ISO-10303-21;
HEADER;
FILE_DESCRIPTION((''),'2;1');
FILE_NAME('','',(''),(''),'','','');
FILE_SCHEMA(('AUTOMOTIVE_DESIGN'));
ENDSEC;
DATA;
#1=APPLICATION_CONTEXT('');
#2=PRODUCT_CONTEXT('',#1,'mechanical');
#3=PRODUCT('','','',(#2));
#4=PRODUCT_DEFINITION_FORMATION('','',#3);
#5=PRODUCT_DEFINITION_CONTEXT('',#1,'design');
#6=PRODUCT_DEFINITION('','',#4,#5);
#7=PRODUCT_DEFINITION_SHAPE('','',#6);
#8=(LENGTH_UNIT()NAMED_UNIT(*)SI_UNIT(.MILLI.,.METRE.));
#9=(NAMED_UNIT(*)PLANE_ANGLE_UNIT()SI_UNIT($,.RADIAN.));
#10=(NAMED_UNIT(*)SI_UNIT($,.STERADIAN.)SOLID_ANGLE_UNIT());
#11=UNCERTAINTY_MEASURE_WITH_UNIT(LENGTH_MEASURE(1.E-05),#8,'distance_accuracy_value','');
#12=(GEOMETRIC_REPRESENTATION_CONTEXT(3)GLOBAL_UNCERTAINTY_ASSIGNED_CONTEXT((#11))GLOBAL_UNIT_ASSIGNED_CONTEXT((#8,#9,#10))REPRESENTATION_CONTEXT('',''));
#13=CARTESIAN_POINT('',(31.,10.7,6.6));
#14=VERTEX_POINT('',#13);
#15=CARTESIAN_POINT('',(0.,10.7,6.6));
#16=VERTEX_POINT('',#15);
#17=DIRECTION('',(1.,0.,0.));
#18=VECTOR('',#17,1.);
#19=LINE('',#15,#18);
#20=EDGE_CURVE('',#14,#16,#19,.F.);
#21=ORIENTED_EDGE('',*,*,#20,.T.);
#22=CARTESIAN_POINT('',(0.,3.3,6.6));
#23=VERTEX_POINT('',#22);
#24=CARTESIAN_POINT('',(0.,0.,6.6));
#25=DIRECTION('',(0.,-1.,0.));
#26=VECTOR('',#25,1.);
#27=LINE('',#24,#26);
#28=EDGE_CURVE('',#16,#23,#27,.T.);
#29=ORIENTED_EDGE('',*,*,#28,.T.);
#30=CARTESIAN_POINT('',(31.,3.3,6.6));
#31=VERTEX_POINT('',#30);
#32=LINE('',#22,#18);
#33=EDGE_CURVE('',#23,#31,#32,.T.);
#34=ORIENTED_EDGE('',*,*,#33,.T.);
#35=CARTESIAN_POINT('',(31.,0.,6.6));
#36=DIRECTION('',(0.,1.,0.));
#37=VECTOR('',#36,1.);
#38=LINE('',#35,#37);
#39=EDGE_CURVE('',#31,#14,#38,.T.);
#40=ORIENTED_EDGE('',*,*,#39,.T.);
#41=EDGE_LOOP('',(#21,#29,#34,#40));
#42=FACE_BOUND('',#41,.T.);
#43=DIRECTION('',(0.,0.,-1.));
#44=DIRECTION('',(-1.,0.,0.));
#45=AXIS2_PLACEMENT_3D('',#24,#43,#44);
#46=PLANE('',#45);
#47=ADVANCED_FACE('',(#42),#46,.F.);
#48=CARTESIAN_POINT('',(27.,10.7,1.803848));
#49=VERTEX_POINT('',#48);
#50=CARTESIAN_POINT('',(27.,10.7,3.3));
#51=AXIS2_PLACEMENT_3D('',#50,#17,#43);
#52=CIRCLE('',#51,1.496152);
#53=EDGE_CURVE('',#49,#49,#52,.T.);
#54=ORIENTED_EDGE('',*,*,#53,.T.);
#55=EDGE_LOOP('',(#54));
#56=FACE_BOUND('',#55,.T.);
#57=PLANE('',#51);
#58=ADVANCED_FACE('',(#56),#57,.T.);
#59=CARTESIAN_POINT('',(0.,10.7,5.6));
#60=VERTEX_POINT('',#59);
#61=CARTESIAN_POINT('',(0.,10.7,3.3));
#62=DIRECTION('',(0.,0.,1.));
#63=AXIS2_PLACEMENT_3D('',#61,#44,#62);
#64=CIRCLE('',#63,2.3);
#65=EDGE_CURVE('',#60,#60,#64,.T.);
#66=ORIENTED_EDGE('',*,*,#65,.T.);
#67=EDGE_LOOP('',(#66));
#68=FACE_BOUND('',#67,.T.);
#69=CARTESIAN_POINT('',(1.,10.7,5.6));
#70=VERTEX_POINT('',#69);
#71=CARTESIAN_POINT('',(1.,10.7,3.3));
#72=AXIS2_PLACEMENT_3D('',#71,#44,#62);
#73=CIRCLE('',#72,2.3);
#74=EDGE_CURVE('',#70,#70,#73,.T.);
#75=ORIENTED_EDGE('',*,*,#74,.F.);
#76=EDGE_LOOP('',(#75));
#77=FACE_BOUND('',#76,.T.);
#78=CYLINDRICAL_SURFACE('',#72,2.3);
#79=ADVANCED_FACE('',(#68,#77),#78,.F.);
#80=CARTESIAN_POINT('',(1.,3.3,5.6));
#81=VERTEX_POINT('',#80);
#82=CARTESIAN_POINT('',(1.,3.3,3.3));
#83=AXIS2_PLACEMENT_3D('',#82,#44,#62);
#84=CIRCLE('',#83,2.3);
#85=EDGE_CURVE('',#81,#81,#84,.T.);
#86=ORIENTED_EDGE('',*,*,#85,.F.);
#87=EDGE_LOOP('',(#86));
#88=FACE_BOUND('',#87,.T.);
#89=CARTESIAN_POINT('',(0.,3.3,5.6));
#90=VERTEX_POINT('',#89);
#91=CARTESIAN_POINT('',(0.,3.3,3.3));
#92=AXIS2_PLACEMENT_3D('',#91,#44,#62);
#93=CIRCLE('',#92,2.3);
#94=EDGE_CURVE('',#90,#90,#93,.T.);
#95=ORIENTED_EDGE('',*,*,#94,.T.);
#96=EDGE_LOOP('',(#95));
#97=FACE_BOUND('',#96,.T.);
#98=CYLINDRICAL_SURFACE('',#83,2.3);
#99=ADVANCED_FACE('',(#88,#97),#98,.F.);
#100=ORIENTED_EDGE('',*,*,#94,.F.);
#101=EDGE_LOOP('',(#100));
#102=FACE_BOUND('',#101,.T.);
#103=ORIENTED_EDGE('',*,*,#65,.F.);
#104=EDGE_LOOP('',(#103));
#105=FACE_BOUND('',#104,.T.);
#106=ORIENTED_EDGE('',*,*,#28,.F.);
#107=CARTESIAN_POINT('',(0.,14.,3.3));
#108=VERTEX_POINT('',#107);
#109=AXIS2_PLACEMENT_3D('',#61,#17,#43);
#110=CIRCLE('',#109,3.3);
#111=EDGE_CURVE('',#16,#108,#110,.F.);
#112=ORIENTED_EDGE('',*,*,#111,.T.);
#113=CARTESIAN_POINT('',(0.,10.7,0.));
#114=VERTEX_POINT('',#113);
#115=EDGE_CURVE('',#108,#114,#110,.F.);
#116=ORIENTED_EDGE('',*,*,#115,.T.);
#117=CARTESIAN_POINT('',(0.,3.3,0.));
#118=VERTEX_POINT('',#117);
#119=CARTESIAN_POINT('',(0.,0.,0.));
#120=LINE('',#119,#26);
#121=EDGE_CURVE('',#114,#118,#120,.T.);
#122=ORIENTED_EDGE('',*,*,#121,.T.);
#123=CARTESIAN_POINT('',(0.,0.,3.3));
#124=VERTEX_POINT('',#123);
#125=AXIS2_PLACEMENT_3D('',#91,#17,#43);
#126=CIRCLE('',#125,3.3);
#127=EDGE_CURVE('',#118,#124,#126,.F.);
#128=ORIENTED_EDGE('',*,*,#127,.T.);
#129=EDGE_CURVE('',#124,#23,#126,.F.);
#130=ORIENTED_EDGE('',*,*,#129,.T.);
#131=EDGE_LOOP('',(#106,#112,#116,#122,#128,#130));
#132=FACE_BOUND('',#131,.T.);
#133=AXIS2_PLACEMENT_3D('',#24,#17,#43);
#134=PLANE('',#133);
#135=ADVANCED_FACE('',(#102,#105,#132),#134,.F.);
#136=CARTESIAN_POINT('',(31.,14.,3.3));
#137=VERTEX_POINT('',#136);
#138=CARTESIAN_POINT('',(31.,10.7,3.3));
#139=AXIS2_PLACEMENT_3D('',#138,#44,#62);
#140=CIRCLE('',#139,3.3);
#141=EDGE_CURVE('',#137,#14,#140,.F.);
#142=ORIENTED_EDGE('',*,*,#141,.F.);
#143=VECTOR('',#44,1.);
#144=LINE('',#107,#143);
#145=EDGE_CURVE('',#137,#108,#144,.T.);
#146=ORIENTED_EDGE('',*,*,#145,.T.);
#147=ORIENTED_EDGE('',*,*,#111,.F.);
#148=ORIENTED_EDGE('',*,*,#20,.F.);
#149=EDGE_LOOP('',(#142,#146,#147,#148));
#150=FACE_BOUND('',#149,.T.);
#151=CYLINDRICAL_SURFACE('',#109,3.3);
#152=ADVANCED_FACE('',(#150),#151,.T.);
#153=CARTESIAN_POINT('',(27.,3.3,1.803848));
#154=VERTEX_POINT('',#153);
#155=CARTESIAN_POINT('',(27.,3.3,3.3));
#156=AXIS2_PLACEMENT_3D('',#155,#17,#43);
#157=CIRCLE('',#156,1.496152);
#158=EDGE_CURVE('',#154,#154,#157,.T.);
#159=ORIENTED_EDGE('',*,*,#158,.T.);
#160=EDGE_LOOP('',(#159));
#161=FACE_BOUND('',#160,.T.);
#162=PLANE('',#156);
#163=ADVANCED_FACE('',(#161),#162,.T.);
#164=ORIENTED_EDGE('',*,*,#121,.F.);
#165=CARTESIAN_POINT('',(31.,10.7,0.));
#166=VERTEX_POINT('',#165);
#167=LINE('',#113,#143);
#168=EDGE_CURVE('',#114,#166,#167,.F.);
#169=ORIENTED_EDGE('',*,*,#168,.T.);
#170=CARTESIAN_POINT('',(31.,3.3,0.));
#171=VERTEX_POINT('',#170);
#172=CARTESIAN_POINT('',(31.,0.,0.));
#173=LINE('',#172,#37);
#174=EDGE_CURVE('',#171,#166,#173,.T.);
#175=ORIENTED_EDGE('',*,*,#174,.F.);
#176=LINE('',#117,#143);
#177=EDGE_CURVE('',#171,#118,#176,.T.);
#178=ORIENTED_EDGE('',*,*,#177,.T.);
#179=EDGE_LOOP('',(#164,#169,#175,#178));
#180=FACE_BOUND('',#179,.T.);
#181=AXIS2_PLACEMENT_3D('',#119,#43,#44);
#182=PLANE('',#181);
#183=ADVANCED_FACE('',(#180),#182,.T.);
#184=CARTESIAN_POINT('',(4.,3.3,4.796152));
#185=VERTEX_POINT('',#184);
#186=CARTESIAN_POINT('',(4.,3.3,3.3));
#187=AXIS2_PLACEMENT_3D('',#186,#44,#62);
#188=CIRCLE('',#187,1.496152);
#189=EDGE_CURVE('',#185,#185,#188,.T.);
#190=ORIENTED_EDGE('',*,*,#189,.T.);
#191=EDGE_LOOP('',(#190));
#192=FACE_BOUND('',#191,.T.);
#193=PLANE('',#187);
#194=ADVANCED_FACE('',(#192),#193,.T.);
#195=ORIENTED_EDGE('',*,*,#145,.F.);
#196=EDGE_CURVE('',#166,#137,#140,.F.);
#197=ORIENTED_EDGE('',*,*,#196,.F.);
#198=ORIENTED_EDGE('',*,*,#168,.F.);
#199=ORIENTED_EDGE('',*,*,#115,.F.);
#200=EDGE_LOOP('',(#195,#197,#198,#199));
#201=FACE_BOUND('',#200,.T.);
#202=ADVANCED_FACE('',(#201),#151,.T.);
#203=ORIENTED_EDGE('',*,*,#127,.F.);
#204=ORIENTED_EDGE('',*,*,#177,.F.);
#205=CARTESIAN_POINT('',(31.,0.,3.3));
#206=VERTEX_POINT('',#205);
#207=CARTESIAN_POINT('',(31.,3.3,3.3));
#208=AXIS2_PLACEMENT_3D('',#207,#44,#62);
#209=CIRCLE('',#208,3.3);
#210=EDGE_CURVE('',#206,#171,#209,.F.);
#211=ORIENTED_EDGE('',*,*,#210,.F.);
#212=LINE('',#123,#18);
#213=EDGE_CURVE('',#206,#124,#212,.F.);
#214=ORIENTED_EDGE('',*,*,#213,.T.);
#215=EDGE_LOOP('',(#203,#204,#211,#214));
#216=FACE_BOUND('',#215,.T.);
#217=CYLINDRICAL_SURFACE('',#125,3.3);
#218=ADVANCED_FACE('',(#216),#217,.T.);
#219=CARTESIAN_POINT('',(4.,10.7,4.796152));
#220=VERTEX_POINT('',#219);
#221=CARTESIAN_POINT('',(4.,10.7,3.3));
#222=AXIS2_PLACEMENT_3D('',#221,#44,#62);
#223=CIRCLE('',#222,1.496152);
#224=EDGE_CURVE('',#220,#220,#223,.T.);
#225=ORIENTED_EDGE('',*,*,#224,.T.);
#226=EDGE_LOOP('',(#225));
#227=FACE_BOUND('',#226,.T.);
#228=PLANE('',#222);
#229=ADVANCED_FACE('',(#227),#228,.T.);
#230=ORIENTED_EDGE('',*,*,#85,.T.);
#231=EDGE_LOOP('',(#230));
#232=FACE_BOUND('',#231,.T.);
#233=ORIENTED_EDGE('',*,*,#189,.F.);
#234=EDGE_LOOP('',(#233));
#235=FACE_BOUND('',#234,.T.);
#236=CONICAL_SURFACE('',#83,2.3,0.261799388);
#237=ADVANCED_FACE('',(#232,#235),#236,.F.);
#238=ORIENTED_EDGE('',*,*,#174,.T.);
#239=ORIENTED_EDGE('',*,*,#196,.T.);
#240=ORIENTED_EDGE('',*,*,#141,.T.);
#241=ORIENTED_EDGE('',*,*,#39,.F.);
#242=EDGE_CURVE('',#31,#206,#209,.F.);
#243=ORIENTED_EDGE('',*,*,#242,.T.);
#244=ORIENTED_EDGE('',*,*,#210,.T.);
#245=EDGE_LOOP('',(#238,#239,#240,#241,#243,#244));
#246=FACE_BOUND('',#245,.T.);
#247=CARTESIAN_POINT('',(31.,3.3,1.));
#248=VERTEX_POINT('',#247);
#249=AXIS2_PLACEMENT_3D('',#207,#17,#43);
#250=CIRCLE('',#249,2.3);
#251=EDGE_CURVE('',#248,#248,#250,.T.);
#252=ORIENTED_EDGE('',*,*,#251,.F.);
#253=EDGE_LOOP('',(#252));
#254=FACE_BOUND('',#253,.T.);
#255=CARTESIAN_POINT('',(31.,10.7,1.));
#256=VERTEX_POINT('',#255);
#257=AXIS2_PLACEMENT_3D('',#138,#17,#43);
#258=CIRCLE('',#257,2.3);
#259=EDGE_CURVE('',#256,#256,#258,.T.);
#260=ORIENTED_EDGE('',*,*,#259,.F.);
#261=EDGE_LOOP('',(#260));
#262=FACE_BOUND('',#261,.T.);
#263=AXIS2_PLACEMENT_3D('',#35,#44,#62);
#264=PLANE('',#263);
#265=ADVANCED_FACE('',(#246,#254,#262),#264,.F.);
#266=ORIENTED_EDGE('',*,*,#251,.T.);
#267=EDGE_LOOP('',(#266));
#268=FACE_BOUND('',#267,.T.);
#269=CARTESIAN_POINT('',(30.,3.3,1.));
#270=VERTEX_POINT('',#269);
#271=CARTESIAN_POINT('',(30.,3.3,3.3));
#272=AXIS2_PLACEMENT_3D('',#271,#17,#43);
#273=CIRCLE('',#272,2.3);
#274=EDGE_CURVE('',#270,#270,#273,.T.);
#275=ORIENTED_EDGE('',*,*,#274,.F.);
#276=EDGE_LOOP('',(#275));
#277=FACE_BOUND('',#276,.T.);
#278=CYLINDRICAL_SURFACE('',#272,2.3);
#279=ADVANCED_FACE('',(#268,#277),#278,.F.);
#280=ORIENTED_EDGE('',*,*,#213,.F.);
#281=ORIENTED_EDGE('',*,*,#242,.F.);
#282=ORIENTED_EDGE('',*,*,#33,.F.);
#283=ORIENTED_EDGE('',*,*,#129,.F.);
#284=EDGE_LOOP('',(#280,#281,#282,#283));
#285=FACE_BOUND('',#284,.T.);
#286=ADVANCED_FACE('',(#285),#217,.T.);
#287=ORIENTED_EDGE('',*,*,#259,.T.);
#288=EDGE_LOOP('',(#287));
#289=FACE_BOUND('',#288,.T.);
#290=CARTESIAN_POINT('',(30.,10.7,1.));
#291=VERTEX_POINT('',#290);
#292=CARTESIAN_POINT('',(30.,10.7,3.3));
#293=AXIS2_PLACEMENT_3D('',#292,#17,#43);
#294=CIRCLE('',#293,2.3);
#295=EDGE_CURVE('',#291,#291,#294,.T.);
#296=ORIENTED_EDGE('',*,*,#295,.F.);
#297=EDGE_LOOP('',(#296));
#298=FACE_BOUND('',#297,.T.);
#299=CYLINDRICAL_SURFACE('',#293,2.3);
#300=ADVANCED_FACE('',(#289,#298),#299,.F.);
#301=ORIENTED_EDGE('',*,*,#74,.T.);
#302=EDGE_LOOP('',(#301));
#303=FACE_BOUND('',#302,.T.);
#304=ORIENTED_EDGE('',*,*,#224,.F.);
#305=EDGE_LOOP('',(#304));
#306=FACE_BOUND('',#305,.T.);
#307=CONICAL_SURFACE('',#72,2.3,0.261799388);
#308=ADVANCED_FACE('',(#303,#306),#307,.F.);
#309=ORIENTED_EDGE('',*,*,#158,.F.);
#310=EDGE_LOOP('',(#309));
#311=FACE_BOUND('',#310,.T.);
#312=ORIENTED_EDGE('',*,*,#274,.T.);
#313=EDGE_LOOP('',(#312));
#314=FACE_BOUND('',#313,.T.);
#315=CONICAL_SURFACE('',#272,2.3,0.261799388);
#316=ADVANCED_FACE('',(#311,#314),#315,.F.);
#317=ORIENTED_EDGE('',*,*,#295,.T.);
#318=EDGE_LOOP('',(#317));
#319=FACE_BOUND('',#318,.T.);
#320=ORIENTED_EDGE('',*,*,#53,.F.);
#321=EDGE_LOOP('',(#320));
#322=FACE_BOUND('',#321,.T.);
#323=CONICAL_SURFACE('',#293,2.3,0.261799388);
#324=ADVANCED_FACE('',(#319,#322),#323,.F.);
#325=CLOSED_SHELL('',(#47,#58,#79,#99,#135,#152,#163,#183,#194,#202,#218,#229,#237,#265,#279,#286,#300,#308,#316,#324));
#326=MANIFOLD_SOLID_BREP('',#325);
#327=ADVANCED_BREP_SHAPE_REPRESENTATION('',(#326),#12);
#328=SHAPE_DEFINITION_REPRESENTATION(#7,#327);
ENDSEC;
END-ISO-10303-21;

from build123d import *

# Parameters (mm, degrees)
SKETCH1_W                = 31
SKETCH1_H                = 14
BOSS_EXTRUDE1_DEPTH      = 6.6
SKETCH2_R                = 2.3
CUT_EXTRUDE1_DEPTH       = 1
ZAOBLIT7_R               = 3.3
ZAOBLIT12_R              = 3.3
ZAOBLIT13_R              = 3.3
ZAOBLIT14_R              = 3.3
ODEBRAT_START            = -1
SKICA1_R                 = 2.3
ODEBRAT_VYSUNUT_M1_DEPTH = 1
SKICA3_R                 = 2.3
ODEBRAT_VYSUNUT_M2_DEPTH = 3
ODEBRAT_VYSUNUT_M2_DRAFT = -15
SKICA4_R                 = 2.3
ODEBRAT_VYSUNUT_M3_DEPTH = 3
ODEBRAT_VYSUNUT_M3_DRAFT = -15
SKICA5_R                 = 2.3
ODEBRAT_VYSUNUT_M4_DEPTH = 3
ODEBRAT_VYSUNUT_M4_DRAFT = -15
SKICA6_R                 = 2.3
ODEBRAT_VYSUNUT_M5_DEPTH = 3
ODEBRAT_VYSUNUT_M5_DRAFT = -15


with BuildPart() as part:
    # Sketch1 → Boss-Extrude1 (new body)
    with BuildSketch(Plane.XY):
        with Locations((15.5, 7)):
            Rectangle(SKETCH1_W, SKETCH1_H)
    extrude(amount=BOSS_EXTRUDE1_DEPTH)

    # Sketch2 → Cut-Extrude1 (cut)
    with BuildSketch(Plane.ZY):
        with Locations((3.3, 10.7)):
            Circle(SKETCH2_R)
        with Locations((3.3, 3.3)):
            Circle(SKETCH2_R)
    extrude(amount=-CUT_EXTRUDE1_DEPTH, mode=Mode.SUBTRACT)

    # Zaoblit7
    zaoblit7_edges = [part.edges().sort_by_distance(p)[0] for p in [
        (15.5, 14, 0),
    ]]
    fillet(zaoblit7_edges, radius=ZAOBLIT7_R)

    # Zaoblit12
    zaoblit12_edges = [part.edges().sort_by_distance(p)[0] for p in [
        (15.5, 14, 6.6),
    ]]
    fillet(zaoblit12_edges, radius=ZAOBLIT12_R - 0.0001)  # a hair under: the kernel refuses the full size

    # Zaoblit13
    zaoblit13_edges = [part.edges().sort_by_distance(p)[0] for p in [
        (15.5, 0, 6.6),
    ]]
    fillet(zaoblit13_edges, radius=ZAOBLIT13_R)

    # Zaoblit14
    zaoblit14_edges = [part.edges().sort_by_distance(p)[0] for p in [
        (15.5, 0, 0),
    ]]
    fillet(zaoblit14_edges, radius=ZAOBLIT14_R - 0.0001)  # a hair under: the kernel refuses the full size

    # Skica1 → Odebrat vysunutím1 (cut)
    with BuildSketch(Plane(origin=(31, 0, 0), x_dir=(0, 0, -1), z_dir=(1, 0, 0)).offset(ODEBRAT_START)):
        with Locations(Location((-3.3, 10.7, 0), (0, 0, 180))):
            Circle(SKICA1_R)
        with Locations(Location((-3.3, 3.3, 0), (0, 0, 180))):
            Circle(SKICA1_R)
    extrude(amount=ODEBRAT_VYSUNUT_M1_DEPTH, mode=Mode.SUBTRACT)


with BuildPart() as odebrat_vysunut_m2_tool:
    # Skica3 → Odebrat vysunutím2 (with draft: the straight prism first)
    with BuildSketch(Plane.ZY.offset(-1)):
        with Locations((3.3, 10.7)):
            Circle(SKICA3_R)
    extrude(amount=-ODEBRAT_VYSUNUT_M2_DEPTH)
    # Odebrat vysunutím2: the draft: its side faces are tilted about the plane it starts from
    odebrat_vysunut_m2_sides = [odebrat_vysunut_m2_tool.faces().sort_by_distance(p)[0] for p in [
        (2.5, 10.7, 1),
    ]]
    draft(odebrat_vysunut_m2_sides, Plane.ZY.offset(-1), ODEBRAT_VYSUNUT_M2_DRAFT)


with BuildPart() as part_1:
    add(part.part)

    # Odebrat vysunutím2: cut by odebrat_vysunut_m2_tool
    add(odebrat_vysunut_m2_tool.part, mode=Mode.SUBTRACT)


with BuildPart() as odebrat_vysunut_m3_tool:
    # Skica4 → Odebrat vysunutím3 (with draft: the straight prism first)
    with BuildSketch(Plane.ZY.offset(-1)):
        with Locations((3.3, 3.3)):
            Circle(SKICA4_R)
    extrude(amount=-ODEBRAT_VYSUNUT_M3_DEPTH)
    # Odebrat vysunutím3: the draft: its side faces are tilted about the plane it starts from
    odebrat_vysunut_m3_sides = [odebrat_vysunut_m3_tool.faces().sort_by_distance(p)[0] for p in [
        (2.5, 3.3, 1),
    ]]
    draft(odebrat_vysunut_m3_sides, Plane.ZY.offset(-1), ODEBRAT_VYSUNUT_M3_DRAFT)


with BuildPart() as part_2:
    add(part_1.part)

    # Odebrat vysunutím3: cut by odebrat_vysunut_m3_tool
    add(odebrat_vysunut_m3_tool.part, mode=Mode.SUBTRACT)


with BuildPart() as odebrat_vysunut_m4_tool:
    # Skica5 → Odebrat vysunutím4 (with draft: the straight prism first)
    with BuildSketch(Plane(origin=(30, 0, 0), x_dir=(0, 0, -1), z_dir=(1, 0, 0))):
        with Locations(Location((-3.3, 10.7, 0), (0, 0, 180))):
            Circle(SKICA5_R)
    extrude(amount=-ODEBRAT_VYSUNUT_M4_DEPTH)
    # Odebrat vysunutím4: the draft: its side faces are tilted about the plane it starts from
    odebrat_vysunut_m4_sides = [odebrat_vysunut_m4_tool.faces().sort_by_distance(p)[0] for p in [
        (28.5, 10.7, 1),
    ]]
    draft(odebrat_vysunut_m4_sides, Plane(origin=(30, 0, 0), x_dir=(0, 0, -1), z_dir=(1, 0, 0)), ODEBRAT_VYSUNUT_M4_DRAFT)


with BuildPart() as part_3:
    add(part_2.part)

    # Odebrat vysunutím4: cut by odebrat_vysunut_m4_tool
    add(odebrat_vysunut_m4_tool.part, mode=Mode.SUBTRACT)


with BuildPart() as odebrat_vysunut_m5_tool:
    # Skica6 → Odebrat vysunutím5 (with draft: the straight prism first)
    with BuildSketch(Plane(origin=(30, 0, 0), x_dir=(0, 0, -1), z_dir=(1, 0, 0))):
        with Locations(Location((-3.3, 3.3, 0), (0, 0, 180))):
            Circle(SKICA6_R)
    extrude(amount=-ODEBRAT_VYSUNUT_M5_DEPTH)
    # Odebrat vysunutím5: the draft: its side faces are tilted about the plane it starts from
    odebrat_vysunut_m5_sides = [odebrat_vysunut_m5_tool.faces().sort_by_distance(p)[0] for p in [
        (28.5, 3.3, 1),
    ]]
    draft(odebrat_vysunut_m5_sides, Plane(origin=(30, 0, 0), x_dir=(0, 0, -1), z_dir=(1, 0, 0)), ODEBRAT_VYSUNUT_M5_DRAFT)


with BuildPart() as part_4:
    add(part_3.part)

    # Odebrat vysunutím5: cut by odebrat_vysunut_m5_tool
    add(odebrat_vysunut_m5_tool.part, mode=Mode.SUBTRACT)


solid = part_4.part
